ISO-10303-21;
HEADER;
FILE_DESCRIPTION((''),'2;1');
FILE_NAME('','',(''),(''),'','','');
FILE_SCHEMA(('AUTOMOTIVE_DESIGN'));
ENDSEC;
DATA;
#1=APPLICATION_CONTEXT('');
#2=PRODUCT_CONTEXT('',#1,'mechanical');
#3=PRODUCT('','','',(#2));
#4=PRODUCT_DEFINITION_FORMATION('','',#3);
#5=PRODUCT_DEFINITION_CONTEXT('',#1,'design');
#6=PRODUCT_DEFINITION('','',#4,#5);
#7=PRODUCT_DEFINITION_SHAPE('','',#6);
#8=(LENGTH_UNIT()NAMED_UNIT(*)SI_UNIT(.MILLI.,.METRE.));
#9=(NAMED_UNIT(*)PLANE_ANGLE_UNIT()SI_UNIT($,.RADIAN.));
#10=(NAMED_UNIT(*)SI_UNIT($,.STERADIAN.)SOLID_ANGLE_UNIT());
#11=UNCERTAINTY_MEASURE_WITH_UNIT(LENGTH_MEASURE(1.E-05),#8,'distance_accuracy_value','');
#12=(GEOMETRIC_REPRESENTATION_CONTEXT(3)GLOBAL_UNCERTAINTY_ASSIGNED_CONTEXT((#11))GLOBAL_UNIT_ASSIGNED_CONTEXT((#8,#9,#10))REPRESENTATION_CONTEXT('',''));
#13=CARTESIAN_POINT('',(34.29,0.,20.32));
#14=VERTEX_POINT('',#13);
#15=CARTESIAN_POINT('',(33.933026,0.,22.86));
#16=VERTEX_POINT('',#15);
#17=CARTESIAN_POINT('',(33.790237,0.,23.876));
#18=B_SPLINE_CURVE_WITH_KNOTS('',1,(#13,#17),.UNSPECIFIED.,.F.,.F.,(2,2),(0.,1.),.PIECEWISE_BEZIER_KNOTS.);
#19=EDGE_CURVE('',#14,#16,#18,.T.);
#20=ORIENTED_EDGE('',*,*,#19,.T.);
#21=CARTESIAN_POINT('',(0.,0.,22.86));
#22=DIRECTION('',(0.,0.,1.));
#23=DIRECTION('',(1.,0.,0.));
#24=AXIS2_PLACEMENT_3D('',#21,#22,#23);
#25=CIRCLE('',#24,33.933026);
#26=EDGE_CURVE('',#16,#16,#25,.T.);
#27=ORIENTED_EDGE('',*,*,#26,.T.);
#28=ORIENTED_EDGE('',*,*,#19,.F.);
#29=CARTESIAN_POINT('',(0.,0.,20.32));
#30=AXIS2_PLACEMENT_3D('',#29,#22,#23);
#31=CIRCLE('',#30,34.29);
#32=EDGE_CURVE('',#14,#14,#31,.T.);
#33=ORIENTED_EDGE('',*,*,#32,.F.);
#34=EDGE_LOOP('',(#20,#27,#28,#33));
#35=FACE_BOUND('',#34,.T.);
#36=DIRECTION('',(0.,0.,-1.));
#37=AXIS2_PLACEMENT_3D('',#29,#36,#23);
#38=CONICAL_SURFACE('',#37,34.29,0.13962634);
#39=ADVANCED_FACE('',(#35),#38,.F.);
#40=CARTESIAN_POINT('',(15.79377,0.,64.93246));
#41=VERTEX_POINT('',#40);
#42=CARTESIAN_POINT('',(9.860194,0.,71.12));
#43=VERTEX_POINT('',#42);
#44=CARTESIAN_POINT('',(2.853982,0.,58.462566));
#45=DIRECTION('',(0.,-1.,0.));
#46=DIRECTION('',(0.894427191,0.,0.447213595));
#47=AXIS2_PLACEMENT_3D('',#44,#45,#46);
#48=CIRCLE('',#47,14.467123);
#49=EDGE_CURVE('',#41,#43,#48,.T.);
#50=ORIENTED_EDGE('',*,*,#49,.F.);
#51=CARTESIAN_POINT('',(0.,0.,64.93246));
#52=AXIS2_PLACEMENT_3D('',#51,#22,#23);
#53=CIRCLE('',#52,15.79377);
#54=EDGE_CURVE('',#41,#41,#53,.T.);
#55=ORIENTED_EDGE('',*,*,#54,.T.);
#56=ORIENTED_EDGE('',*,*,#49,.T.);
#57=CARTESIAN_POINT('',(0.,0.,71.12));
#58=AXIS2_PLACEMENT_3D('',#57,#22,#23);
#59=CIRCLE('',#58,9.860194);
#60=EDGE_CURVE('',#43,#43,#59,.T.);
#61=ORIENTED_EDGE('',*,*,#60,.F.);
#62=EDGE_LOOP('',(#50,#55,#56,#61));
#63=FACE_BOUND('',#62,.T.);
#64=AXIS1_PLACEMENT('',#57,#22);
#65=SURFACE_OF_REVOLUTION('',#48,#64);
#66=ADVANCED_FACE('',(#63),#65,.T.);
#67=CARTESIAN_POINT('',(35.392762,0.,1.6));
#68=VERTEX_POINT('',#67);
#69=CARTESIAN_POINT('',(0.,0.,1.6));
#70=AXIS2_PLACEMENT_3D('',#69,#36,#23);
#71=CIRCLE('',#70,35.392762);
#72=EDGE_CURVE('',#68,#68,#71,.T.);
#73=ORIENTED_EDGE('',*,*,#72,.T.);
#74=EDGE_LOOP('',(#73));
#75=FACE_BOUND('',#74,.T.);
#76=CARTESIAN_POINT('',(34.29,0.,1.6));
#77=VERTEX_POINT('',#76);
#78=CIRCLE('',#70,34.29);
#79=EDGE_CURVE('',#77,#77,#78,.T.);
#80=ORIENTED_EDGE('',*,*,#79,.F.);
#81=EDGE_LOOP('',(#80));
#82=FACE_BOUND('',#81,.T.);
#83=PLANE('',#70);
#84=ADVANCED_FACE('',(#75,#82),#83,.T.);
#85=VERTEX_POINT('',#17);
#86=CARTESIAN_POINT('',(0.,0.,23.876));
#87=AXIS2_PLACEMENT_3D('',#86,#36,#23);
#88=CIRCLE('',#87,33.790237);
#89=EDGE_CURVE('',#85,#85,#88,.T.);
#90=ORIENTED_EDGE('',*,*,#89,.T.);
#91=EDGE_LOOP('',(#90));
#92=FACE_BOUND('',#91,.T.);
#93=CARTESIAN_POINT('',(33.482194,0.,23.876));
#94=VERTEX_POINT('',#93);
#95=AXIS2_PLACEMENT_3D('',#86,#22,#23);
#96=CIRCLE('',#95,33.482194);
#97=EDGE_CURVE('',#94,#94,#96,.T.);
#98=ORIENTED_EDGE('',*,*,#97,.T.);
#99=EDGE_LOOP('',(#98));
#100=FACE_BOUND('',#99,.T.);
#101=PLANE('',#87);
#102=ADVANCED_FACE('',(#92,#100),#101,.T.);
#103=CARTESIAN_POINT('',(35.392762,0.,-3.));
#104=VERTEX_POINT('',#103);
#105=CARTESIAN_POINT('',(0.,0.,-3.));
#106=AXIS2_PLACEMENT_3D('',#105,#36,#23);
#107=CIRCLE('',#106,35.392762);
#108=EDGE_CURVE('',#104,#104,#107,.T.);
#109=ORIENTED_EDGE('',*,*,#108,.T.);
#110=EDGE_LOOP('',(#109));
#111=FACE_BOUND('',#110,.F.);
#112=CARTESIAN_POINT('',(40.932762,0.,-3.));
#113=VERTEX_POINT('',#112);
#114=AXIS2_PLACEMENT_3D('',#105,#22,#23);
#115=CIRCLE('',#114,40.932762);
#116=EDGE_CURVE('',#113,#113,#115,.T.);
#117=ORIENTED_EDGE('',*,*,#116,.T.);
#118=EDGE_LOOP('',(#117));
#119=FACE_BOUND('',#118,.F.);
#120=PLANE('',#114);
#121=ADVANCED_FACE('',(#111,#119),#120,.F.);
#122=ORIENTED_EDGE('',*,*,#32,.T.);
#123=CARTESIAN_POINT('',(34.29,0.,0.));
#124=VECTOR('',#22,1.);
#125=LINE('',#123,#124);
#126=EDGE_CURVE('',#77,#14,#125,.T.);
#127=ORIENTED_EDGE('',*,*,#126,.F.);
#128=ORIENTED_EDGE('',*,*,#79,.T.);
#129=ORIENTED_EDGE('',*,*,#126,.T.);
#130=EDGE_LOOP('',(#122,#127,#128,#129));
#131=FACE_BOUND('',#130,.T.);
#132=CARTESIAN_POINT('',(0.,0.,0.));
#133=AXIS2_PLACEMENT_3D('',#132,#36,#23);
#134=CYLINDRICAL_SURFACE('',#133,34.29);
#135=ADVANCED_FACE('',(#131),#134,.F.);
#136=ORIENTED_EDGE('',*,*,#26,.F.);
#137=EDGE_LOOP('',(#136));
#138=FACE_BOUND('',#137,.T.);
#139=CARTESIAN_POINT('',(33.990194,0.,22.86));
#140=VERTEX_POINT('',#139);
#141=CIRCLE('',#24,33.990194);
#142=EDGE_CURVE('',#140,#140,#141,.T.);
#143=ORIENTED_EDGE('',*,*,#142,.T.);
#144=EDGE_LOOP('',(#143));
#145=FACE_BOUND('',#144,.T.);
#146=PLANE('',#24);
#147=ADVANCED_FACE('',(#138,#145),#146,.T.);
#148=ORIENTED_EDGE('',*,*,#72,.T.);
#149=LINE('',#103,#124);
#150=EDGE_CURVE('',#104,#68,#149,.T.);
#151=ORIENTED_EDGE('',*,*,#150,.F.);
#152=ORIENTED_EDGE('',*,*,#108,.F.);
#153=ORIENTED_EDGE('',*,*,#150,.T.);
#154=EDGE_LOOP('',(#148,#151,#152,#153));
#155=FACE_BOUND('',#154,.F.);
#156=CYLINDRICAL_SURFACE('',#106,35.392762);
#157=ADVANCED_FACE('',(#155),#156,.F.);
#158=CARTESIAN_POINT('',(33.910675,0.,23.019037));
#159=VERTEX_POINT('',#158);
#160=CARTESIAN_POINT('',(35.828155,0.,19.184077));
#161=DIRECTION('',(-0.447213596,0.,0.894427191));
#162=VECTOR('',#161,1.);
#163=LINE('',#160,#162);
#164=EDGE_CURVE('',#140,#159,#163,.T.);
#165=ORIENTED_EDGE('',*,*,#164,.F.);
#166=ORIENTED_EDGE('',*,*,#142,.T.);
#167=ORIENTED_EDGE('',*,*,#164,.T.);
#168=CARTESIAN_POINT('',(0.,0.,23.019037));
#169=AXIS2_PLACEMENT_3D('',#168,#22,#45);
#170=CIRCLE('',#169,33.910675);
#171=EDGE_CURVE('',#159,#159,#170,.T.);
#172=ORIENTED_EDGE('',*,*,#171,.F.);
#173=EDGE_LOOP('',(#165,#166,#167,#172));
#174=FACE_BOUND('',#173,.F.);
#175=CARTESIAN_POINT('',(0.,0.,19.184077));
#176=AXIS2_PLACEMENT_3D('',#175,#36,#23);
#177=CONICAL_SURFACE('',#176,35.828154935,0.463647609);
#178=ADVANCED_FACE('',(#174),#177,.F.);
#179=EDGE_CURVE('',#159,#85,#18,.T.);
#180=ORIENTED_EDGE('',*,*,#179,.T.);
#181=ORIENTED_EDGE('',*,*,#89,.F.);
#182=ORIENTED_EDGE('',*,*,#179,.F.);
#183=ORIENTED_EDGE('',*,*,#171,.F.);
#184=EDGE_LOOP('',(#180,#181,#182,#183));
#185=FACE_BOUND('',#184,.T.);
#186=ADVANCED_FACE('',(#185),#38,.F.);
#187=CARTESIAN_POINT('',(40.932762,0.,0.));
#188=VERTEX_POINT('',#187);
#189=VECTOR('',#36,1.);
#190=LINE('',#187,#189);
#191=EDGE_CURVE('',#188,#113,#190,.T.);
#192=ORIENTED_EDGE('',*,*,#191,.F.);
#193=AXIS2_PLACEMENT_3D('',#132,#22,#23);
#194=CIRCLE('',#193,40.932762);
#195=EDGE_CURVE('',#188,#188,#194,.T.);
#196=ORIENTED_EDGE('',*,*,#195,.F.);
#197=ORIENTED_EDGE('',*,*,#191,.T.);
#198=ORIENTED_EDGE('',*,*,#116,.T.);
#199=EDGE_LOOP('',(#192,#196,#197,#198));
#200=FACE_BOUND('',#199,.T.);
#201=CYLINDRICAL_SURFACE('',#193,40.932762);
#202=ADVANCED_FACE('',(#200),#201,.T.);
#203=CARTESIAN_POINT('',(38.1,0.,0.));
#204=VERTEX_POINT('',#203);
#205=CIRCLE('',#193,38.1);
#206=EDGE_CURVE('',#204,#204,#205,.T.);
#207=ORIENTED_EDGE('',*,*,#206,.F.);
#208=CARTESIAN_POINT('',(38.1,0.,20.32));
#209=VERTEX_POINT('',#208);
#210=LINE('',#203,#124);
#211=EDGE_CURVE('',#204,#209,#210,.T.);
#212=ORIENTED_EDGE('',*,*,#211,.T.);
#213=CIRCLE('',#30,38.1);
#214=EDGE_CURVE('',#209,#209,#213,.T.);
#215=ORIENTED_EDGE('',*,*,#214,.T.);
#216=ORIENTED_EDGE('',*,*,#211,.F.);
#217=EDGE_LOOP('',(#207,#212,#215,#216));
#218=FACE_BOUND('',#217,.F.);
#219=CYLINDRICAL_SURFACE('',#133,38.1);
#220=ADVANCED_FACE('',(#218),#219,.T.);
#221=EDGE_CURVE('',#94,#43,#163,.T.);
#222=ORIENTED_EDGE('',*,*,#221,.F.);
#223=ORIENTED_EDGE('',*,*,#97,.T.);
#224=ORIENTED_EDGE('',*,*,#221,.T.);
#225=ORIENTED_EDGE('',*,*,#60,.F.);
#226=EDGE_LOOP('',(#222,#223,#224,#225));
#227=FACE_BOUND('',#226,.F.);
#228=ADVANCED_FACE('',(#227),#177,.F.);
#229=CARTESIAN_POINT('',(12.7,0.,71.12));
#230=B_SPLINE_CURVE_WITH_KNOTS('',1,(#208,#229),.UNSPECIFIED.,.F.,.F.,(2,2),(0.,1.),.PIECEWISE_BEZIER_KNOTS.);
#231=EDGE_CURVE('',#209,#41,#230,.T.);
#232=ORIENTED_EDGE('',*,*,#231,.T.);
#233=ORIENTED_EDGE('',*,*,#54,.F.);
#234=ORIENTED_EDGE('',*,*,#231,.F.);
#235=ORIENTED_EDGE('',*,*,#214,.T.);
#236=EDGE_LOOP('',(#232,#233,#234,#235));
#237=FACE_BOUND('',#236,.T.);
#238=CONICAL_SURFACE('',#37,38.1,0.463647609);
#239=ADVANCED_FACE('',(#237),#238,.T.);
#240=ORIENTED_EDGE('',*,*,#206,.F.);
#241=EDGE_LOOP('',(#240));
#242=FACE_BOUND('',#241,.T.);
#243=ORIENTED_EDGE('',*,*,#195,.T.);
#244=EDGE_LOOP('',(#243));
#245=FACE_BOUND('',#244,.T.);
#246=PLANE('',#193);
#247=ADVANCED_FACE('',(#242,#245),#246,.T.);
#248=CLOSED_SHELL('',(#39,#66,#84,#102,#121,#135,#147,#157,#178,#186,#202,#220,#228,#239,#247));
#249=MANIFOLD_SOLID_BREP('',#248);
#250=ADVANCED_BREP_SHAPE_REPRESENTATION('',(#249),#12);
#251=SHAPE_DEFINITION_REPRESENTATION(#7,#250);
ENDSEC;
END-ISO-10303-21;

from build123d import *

# Parameters (mm, degrees)
F0_R      = 38.1
F0_R_2    = 34.29
F1_DEPTH  = 20.32
F4_R      = 38.1
F3_R      = 12.7
F6_T      = -2.54
F5_FACE_R = 34.29
F7_DEPTH  = 3.556
F7_TAPER  = 8
F9_R      = 40.932761629
F10_DEPTH = 3
F11_R     = 35.392761629
F12_DEPTH = 4.6


# Not quite as in the source:
# - a fillet or chamfer that OpenCascade refuses, or shapes differently, is made with other operations: its cross-section is extruded or revolved along the edge and cut away or added


with BuildPart() as f1:
    # F0 (on Top) → F1 (new body)
    with BuildSketch(Plane.XY):
        Circle(F0_R)
        Circle(F0_R_2, mode=Mode.SUBTRACT)
    extrude(amount=F1_DEPTH)

    # F4 (on face) → F5 section 0
    with BuildSketch(Plane.XY.offset(20.32)):
        Circle(F4_R)
    # F3 (on offset) → F5 section 1
    with BuildSketch(Plane.XY.offset(71.12)):
        Circle(F3_R)
    loft()

    # F6
    f6_openings = [f1.faces().sort_by_distance(p)[0] for p in [
        (0, 0, 71.12),
    ]]
    offset(amount=F6_T, openings=f6_openings, kind=Kind.INTERSECTION)

    # F5_face (on face) → F7 (cut)
    with BuildSketch(Plane(origin=(0, 0, 20.32), x_dir=(1, 0, 0), z_dir=(0, 0, -1))):
        Circle(F5_FACE_R)
    extrude(amount=-F7_DEPTH, taper=F7_TAPER, mode=Mode.SUBTRACT)

    # F8: fillet of radius 14.4671225158 on 1 edges, made by hand

    # F8_s1 → F8_t2 (revolve, cut)
    with BuildSketch(Plane.XZ):
        with BuildLine():
            ThreePointArc((15.7937700832, 64.9324598335), (13.2958276301, 68.4758321875), (9.8601936686, 71.12))
            Line((9.8601936686, 71.12), (12.7, 71.12))
            Line((12.7, 71.12), (15.7937700832, 64.9324598335))
        make_face()
    revolve(axis=Axis((0, 0, 71.12), (0, 0, 1)), mode=Mode.SUBTRACT)

    # F9 (on Top) → F10 (join)
    with BuildSketch(Plane.XY):
        Circle(F9_R)
    extrude(amount=-F10_DEPTH)

    # F11 (on face) → F12 (cut)
    with BuildSketch(Plane(origin=(0, 0, -3), x_dir=(1, 0, 0), z_dir=(0, 0, -1))):
        Circle(F11_R)
    extrude(amount=-F12_DEPTH, mode=Mode.SUBTRACT)


solid = f1.part
